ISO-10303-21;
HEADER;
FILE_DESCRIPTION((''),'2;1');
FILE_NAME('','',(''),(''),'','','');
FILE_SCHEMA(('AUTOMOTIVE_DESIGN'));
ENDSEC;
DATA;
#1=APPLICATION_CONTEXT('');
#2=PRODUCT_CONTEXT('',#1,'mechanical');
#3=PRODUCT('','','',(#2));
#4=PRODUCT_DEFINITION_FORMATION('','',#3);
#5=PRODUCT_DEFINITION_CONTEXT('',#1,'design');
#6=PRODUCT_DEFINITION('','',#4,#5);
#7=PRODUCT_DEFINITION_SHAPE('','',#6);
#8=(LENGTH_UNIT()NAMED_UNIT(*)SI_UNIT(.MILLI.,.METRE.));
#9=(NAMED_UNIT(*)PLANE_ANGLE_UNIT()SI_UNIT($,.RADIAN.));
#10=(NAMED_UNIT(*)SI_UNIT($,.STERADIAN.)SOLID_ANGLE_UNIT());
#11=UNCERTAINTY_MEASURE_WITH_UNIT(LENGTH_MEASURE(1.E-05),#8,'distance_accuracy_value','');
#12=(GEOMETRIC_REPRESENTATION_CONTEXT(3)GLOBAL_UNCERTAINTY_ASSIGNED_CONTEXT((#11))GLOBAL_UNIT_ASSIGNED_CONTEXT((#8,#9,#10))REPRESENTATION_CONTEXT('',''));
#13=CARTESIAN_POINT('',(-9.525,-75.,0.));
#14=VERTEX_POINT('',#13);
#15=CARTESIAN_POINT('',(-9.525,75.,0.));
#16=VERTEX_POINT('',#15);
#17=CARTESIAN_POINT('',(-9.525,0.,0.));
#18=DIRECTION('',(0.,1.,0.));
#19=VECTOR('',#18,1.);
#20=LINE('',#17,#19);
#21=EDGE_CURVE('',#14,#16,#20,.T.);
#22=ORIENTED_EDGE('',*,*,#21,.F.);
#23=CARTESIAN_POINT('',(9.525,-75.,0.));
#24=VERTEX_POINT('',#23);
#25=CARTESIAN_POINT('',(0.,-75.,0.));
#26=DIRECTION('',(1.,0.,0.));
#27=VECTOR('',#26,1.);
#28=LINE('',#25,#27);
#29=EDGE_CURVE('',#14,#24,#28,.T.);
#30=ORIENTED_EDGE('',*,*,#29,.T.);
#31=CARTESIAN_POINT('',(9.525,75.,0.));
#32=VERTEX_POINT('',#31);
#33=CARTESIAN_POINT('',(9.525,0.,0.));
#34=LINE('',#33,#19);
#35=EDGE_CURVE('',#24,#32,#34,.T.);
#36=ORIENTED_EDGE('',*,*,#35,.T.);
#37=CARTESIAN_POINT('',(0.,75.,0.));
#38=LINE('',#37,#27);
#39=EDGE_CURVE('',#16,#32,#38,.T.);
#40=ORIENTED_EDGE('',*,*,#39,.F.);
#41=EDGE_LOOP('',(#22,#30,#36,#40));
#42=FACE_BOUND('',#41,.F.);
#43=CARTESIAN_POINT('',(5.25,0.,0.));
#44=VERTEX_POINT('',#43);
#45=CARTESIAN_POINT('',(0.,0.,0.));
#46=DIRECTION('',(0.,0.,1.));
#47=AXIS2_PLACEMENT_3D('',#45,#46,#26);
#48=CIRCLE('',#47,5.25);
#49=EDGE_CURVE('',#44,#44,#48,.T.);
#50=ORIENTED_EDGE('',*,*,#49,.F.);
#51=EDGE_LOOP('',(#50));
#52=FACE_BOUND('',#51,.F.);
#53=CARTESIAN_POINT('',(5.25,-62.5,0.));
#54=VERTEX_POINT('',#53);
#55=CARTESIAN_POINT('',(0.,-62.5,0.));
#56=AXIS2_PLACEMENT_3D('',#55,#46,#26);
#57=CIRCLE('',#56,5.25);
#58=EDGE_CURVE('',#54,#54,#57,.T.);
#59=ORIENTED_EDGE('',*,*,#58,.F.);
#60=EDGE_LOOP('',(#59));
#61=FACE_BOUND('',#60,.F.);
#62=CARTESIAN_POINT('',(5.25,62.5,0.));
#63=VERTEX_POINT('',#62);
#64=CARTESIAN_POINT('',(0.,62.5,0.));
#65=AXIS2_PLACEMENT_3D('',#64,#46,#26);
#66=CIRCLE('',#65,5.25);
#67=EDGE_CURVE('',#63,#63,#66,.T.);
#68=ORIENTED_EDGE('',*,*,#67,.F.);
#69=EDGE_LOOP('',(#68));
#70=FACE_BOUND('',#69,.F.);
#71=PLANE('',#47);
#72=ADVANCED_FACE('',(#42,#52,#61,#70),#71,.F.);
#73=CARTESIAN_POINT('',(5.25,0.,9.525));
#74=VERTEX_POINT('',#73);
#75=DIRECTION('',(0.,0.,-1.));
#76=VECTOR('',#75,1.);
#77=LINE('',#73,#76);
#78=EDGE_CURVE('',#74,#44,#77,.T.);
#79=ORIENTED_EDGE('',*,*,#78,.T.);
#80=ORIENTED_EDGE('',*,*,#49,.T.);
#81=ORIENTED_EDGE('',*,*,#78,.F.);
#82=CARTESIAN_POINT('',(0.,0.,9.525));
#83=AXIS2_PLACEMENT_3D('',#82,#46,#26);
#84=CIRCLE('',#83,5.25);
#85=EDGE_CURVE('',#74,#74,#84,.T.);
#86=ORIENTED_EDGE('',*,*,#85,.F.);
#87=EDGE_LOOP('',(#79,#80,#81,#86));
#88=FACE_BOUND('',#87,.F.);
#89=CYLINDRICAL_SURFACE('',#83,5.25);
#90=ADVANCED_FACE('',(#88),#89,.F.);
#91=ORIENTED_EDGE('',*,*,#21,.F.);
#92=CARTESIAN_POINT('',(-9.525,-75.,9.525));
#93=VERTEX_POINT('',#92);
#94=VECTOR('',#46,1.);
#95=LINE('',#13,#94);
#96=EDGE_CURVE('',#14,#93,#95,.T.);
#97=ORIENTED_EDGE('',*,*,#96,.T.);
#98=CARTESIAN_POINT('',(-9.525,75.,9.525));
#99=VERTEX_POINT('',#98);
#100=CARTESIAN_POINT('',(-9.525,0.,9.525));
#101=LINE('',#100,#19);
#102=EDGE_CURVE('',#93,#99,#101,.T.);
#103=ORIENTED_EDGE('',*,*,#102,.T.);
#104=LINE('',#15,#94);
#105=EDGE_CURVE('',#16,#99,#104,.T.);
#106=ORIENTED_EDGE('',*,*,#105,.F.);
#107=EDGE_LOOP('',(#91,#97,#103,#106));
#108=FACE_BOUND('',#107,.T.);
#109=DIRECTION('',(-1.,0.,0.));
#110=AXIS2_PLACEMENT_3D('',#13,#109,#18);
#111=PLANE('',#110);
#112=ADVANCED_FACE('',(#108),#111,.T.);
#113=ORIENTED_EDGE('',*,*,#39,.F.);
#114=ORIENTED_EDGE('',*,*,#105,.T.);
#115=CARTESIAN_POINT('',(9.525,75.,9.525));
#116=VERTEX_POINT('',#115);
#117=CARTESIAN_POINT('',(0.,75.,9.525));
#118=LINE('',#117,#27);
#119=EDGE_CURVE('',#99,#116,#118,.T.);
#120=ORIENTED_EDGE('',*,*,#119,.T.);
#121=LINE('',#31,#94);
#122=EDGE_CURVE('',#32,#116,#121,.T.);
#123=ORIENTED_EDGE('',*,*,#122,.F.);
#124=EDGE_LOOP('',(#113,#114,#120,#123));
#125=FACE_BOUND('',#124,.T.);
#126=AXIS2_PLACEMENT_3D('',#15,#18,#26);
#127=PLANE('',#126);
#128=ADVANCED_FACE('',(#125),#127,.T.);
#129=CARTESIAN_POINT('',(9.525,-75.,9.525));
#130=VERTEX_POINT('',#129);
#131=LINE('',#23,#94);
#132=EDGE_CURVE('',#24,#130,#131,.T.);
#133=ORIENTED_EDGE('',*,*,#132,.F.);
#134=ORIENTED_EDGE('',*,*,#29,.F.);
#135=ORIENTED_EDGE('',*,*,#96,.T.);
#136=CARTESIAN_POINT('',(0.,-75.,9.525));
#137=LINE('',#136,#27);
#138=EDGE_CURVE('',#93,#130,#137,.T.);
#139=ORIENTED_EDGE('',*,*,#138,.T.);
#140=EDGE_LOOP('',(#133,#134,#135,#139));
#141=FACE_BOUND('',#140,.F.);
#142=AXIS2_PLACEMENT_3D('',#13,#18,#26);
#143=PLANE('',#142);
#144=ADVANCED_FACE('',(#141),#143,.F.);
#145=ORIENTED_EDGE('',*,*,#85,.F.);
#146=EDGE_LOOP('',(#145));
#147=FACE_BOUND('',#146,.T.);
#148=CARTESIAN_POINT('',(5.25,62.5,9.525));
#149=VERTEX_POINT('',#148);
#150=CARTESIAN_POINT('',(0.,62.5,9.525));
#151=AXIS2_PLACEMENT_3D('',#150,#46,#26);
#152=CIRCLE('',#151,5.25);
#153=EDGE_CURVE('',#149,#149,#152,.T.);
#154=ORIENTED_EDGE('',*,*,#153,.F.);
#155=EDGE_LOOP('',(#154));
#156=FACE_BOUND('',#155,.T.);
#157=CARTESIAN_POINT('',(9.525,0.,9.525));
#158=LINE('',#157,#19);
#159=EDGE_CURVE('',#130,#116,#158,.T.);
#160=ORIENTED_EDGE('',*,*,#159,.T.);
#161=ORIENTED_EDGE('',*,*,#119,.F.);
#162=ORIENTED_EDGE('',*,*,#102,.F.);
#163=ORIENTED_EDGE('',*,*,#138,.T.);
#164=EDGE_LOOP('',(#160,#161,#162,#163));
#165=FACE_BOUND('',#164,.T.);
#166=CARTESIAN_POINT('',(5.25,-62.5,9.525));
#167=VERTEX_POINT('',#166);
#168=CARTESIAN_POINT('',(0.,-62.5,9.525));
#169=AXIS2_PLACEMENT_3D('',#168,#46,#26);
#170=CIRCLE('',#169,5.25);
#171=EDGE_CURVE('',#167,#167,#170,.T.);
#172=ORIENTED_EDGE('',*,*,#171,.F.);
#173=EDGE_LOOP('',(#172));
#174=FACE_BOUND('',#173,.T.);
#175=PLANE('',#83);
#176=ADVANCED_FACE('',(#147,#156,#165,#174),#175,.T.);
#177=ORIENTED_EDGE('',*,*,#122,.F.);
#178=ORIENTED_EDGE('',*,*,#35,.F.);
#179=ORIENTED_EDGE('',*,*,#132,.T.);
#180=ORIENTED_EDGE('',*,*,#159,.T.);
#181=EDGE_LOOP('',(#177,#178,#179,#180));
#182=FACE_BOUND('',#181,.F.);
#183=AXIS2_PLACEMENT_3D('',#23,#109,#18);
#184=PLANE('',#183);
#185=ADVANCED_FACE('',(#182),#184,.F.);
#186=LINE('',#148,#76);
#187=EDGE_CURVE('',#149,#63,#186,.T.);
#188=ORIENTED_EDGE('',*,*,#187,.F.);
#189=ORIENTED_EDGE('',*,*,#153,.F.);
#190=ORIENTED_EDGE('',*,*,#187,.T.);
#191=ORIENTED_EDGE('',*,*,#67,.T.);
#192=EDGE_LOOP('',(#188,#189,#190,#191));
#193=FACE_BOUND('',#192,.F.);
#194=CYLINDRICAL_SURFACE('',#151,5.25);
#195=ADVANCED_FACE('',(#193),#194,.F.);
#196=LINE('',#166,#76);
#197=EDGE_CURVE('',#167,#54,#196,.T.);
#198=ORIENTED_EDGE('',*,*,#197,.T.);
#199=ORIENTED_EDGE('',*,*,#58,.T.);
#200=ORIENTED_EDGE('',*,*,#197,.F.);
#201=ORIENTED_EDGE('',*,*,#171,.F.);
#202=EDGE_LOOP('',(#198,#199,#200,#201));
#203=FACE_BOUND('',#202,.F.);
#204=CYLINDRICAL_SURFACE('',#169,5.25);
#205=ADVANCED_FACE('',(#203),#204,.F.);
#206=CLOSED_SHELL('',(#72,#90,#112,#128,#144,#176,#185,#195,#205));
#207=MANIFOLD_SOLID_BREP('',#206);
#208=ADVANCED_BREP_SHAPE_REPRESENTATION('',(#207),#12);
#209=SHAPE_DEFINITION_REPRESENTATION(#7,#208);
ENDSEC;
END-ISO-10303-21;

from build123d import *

# Parameters (mm, degrees)
F0_W     = 19.05
F0_H     = 150
F1_DEPTH = 9.525
F2_R     = 5.25
F3_DEPTH = 25.4
F4_R     = 5.25
F5_DEPTH = 25.4


# Not quite as in the source:
# - a length typed as a fraction of an inch, garbled in the dataset ("3 / 203.2 mm" for 3/8 in), is restored


with BuildPart() as f1:
    # F0 (on Top) → F1 (new body)
    with BuildSketch(Plane.XY):
        Rectangle(F0_W, F0_H)
    extrude(amount=F1_DEPTH)

    # F2 (on face) → F3 (cut)
    with BuildSketch(Plane.XY.offset(9.525)):
        with Locations((0, 62.5)):
            Circle(F2_R)
        with Locations((0, -62.5)):
            Circle(F2_R)
    extrude(amount=-F3_DEPTH, mode=Mode.SUBTRACT)

    # F4 (on face) → F5 (cut)
    with BuildSketch(Plane.XY.offset(9.525)):
        Circle(F4_R)
    extrude(amount=-F5_DEPTH, mode=Mode.SUBTRACT)


solid = f1.part
